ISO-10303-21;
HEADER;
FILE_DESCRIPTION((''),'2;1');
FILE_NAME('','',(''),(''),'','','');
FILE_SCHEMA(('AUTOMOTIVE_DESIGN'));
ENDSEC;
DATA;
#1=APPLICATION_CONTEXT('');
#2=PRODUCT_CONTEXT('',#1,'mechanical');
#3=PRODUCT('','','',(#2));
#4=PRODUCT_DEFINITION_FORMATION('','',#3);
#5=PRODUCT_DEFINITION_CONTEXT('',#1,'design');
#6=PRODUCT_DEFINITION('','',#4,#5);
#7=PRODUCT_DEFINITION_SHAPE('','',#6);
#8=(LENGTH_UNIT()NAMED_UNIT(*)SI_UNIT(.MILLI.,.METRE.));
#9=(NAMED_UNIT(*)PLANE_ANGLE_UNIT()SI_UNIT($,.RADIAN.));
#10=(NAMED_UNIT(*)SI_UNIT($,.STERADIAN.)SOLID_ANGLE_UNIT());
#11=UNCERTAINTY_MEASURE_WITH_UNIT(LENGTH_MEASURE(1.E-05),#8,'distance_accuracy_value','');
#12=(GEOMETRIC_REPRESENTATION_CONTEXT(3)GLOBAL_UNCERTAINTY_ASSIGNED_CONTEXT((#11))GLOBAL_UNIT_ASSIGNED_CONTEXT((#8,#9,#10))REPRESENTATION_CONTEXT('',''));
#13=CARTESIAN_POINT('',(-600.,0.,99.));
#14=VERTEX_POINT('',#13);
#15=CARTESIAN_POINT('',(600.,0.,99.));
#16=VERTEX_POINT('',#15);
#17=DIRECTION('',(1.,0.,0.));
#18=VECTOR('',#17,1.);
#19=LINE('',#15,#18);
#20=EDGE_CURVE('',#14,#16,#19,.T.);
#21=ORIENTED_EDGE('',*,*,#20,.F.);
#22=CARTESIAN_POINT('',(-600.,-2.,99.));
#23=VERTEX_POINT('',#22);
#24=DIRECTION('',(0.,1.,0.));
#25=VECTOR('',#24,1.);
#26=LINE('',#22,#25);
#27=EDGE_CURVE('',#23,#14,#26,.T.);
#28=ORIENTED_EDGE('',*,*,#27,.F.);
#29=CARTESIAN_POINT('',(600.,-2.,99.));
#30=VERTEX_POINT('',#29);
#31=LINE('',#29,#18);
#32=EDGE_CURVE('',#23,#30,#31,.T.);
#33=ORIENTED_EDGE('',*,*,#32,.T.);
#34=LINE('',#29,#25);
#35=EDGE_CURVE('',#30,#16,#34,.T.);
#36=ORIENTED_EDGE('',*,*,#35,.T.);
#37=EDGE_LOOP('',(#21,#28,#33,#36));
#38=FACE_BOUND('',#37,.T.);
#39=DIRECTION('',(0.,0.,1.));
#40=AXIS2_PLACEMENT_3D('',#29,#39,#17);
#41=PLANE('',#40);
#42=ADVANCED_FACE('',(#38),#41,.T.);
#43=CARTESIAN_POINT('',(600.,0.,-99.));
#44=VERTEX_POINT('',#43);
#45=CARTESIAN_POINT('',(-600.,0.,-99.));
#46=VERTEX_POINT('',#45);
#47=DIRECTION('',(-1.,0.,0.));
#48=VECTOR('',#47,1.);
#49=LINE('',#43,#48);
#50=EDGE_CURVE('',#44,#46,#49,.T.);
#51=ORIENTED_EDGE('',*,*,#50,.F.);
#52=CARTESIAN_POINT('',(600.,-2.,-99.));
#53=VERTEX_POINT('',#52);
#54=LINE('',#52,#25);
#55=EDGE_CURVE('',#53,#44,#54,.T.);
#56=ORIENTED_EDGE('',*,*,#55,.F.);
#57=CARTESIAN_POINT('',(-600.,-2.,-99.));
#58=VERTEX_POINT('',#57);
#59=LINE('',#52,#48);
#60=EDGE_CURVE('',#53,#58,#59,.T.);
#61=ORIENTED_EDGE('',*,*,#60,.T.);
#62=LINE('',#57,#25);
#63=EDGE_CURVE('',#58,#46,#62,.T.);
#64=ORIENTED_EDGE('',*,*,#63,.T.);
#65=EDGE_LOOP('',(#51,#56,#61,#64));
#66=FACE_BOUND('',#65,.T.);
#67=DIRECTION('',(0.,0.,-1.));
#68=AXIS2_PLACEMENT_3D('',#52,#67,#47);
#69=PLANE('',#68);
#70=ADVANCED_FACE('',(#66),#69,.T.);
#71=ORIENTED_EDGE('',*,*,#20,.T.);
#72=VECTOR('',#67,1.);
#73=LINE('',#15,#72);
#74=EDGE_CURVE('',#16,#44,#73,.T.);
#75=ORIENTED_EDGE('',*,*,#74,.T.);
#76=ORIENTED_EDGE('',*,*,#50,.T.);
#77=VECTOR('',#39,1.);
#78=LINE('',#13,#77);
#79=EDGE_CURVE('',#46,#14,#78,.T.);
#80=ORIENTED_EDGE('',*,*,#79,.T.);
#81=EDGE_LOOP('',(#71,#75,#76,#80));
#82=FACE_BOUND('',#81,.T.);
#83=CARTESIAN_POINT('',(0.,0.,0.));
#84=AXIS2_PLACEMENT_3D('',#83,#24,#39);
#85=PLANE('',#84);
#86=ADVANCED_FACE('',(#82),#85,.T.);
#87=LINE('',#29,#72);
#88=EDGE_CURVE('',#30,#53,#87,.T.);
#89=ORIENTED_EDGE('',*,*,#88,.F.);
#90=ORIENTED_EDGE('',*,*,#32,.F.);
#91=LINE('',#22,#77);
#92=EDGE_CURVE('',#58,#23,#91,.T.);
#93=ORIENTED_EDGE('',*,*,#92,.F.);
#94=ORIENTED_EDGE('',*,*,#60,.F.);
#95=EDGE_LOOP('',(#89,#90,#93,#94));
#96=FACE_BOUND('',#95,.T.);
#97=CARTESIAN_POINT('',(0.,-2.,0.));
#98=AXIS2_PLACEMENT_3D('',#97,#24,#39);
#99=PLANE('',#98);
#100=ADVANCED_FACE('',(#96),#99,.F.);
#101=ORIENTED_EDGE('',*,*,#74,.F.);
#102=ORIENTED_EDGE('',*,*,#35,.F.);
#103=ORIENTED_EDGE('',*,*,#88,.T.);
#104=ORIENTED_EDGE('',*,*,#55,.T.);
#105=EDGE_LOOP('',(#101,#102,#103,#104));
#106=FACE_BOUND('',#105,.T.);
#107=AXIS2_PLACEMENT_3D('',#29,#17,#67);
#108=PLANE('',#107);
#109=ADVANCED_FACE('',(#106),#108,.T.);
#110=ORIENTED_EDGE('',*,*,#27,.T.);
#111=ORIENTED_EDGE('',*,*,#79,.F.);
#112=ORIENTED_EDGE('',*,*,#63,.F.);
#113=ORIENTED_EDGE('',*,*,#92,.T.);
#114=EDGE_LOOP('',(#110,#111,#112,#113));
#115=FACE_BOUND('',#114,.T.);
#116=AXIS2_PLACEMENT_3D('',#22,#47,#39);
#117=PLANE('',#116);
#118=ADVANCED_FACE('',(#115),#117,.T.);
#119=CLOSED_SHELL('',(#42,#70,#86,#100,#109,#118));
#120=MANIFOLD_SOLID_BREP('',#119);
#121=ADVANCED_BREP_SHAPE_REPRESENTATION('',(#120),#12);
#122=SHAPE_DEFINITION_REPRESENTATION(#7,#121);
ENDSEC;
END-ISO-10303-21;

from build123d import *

# Parameters (mm, degrees)
SKETCH1_W          = 1200
SKETCH1_H          = 198
BASE_FLANGE1_DEPTH = 2


# Sheet-metal steps are written as plain solids
with BuildPart() as part:
    # Sketch1 → Base-Flange1 (new body)
    with BuildSketch(Plane(origin=(0, 0, 0), x_dir=(1, 0, 0), z_dir=(0, 1, 0))):
        Rectangle(SKETCH1_W, SKETCH1_H)
    extrude(amount=-BASE_FLANGE1_DEPTH)


solid = part.part
